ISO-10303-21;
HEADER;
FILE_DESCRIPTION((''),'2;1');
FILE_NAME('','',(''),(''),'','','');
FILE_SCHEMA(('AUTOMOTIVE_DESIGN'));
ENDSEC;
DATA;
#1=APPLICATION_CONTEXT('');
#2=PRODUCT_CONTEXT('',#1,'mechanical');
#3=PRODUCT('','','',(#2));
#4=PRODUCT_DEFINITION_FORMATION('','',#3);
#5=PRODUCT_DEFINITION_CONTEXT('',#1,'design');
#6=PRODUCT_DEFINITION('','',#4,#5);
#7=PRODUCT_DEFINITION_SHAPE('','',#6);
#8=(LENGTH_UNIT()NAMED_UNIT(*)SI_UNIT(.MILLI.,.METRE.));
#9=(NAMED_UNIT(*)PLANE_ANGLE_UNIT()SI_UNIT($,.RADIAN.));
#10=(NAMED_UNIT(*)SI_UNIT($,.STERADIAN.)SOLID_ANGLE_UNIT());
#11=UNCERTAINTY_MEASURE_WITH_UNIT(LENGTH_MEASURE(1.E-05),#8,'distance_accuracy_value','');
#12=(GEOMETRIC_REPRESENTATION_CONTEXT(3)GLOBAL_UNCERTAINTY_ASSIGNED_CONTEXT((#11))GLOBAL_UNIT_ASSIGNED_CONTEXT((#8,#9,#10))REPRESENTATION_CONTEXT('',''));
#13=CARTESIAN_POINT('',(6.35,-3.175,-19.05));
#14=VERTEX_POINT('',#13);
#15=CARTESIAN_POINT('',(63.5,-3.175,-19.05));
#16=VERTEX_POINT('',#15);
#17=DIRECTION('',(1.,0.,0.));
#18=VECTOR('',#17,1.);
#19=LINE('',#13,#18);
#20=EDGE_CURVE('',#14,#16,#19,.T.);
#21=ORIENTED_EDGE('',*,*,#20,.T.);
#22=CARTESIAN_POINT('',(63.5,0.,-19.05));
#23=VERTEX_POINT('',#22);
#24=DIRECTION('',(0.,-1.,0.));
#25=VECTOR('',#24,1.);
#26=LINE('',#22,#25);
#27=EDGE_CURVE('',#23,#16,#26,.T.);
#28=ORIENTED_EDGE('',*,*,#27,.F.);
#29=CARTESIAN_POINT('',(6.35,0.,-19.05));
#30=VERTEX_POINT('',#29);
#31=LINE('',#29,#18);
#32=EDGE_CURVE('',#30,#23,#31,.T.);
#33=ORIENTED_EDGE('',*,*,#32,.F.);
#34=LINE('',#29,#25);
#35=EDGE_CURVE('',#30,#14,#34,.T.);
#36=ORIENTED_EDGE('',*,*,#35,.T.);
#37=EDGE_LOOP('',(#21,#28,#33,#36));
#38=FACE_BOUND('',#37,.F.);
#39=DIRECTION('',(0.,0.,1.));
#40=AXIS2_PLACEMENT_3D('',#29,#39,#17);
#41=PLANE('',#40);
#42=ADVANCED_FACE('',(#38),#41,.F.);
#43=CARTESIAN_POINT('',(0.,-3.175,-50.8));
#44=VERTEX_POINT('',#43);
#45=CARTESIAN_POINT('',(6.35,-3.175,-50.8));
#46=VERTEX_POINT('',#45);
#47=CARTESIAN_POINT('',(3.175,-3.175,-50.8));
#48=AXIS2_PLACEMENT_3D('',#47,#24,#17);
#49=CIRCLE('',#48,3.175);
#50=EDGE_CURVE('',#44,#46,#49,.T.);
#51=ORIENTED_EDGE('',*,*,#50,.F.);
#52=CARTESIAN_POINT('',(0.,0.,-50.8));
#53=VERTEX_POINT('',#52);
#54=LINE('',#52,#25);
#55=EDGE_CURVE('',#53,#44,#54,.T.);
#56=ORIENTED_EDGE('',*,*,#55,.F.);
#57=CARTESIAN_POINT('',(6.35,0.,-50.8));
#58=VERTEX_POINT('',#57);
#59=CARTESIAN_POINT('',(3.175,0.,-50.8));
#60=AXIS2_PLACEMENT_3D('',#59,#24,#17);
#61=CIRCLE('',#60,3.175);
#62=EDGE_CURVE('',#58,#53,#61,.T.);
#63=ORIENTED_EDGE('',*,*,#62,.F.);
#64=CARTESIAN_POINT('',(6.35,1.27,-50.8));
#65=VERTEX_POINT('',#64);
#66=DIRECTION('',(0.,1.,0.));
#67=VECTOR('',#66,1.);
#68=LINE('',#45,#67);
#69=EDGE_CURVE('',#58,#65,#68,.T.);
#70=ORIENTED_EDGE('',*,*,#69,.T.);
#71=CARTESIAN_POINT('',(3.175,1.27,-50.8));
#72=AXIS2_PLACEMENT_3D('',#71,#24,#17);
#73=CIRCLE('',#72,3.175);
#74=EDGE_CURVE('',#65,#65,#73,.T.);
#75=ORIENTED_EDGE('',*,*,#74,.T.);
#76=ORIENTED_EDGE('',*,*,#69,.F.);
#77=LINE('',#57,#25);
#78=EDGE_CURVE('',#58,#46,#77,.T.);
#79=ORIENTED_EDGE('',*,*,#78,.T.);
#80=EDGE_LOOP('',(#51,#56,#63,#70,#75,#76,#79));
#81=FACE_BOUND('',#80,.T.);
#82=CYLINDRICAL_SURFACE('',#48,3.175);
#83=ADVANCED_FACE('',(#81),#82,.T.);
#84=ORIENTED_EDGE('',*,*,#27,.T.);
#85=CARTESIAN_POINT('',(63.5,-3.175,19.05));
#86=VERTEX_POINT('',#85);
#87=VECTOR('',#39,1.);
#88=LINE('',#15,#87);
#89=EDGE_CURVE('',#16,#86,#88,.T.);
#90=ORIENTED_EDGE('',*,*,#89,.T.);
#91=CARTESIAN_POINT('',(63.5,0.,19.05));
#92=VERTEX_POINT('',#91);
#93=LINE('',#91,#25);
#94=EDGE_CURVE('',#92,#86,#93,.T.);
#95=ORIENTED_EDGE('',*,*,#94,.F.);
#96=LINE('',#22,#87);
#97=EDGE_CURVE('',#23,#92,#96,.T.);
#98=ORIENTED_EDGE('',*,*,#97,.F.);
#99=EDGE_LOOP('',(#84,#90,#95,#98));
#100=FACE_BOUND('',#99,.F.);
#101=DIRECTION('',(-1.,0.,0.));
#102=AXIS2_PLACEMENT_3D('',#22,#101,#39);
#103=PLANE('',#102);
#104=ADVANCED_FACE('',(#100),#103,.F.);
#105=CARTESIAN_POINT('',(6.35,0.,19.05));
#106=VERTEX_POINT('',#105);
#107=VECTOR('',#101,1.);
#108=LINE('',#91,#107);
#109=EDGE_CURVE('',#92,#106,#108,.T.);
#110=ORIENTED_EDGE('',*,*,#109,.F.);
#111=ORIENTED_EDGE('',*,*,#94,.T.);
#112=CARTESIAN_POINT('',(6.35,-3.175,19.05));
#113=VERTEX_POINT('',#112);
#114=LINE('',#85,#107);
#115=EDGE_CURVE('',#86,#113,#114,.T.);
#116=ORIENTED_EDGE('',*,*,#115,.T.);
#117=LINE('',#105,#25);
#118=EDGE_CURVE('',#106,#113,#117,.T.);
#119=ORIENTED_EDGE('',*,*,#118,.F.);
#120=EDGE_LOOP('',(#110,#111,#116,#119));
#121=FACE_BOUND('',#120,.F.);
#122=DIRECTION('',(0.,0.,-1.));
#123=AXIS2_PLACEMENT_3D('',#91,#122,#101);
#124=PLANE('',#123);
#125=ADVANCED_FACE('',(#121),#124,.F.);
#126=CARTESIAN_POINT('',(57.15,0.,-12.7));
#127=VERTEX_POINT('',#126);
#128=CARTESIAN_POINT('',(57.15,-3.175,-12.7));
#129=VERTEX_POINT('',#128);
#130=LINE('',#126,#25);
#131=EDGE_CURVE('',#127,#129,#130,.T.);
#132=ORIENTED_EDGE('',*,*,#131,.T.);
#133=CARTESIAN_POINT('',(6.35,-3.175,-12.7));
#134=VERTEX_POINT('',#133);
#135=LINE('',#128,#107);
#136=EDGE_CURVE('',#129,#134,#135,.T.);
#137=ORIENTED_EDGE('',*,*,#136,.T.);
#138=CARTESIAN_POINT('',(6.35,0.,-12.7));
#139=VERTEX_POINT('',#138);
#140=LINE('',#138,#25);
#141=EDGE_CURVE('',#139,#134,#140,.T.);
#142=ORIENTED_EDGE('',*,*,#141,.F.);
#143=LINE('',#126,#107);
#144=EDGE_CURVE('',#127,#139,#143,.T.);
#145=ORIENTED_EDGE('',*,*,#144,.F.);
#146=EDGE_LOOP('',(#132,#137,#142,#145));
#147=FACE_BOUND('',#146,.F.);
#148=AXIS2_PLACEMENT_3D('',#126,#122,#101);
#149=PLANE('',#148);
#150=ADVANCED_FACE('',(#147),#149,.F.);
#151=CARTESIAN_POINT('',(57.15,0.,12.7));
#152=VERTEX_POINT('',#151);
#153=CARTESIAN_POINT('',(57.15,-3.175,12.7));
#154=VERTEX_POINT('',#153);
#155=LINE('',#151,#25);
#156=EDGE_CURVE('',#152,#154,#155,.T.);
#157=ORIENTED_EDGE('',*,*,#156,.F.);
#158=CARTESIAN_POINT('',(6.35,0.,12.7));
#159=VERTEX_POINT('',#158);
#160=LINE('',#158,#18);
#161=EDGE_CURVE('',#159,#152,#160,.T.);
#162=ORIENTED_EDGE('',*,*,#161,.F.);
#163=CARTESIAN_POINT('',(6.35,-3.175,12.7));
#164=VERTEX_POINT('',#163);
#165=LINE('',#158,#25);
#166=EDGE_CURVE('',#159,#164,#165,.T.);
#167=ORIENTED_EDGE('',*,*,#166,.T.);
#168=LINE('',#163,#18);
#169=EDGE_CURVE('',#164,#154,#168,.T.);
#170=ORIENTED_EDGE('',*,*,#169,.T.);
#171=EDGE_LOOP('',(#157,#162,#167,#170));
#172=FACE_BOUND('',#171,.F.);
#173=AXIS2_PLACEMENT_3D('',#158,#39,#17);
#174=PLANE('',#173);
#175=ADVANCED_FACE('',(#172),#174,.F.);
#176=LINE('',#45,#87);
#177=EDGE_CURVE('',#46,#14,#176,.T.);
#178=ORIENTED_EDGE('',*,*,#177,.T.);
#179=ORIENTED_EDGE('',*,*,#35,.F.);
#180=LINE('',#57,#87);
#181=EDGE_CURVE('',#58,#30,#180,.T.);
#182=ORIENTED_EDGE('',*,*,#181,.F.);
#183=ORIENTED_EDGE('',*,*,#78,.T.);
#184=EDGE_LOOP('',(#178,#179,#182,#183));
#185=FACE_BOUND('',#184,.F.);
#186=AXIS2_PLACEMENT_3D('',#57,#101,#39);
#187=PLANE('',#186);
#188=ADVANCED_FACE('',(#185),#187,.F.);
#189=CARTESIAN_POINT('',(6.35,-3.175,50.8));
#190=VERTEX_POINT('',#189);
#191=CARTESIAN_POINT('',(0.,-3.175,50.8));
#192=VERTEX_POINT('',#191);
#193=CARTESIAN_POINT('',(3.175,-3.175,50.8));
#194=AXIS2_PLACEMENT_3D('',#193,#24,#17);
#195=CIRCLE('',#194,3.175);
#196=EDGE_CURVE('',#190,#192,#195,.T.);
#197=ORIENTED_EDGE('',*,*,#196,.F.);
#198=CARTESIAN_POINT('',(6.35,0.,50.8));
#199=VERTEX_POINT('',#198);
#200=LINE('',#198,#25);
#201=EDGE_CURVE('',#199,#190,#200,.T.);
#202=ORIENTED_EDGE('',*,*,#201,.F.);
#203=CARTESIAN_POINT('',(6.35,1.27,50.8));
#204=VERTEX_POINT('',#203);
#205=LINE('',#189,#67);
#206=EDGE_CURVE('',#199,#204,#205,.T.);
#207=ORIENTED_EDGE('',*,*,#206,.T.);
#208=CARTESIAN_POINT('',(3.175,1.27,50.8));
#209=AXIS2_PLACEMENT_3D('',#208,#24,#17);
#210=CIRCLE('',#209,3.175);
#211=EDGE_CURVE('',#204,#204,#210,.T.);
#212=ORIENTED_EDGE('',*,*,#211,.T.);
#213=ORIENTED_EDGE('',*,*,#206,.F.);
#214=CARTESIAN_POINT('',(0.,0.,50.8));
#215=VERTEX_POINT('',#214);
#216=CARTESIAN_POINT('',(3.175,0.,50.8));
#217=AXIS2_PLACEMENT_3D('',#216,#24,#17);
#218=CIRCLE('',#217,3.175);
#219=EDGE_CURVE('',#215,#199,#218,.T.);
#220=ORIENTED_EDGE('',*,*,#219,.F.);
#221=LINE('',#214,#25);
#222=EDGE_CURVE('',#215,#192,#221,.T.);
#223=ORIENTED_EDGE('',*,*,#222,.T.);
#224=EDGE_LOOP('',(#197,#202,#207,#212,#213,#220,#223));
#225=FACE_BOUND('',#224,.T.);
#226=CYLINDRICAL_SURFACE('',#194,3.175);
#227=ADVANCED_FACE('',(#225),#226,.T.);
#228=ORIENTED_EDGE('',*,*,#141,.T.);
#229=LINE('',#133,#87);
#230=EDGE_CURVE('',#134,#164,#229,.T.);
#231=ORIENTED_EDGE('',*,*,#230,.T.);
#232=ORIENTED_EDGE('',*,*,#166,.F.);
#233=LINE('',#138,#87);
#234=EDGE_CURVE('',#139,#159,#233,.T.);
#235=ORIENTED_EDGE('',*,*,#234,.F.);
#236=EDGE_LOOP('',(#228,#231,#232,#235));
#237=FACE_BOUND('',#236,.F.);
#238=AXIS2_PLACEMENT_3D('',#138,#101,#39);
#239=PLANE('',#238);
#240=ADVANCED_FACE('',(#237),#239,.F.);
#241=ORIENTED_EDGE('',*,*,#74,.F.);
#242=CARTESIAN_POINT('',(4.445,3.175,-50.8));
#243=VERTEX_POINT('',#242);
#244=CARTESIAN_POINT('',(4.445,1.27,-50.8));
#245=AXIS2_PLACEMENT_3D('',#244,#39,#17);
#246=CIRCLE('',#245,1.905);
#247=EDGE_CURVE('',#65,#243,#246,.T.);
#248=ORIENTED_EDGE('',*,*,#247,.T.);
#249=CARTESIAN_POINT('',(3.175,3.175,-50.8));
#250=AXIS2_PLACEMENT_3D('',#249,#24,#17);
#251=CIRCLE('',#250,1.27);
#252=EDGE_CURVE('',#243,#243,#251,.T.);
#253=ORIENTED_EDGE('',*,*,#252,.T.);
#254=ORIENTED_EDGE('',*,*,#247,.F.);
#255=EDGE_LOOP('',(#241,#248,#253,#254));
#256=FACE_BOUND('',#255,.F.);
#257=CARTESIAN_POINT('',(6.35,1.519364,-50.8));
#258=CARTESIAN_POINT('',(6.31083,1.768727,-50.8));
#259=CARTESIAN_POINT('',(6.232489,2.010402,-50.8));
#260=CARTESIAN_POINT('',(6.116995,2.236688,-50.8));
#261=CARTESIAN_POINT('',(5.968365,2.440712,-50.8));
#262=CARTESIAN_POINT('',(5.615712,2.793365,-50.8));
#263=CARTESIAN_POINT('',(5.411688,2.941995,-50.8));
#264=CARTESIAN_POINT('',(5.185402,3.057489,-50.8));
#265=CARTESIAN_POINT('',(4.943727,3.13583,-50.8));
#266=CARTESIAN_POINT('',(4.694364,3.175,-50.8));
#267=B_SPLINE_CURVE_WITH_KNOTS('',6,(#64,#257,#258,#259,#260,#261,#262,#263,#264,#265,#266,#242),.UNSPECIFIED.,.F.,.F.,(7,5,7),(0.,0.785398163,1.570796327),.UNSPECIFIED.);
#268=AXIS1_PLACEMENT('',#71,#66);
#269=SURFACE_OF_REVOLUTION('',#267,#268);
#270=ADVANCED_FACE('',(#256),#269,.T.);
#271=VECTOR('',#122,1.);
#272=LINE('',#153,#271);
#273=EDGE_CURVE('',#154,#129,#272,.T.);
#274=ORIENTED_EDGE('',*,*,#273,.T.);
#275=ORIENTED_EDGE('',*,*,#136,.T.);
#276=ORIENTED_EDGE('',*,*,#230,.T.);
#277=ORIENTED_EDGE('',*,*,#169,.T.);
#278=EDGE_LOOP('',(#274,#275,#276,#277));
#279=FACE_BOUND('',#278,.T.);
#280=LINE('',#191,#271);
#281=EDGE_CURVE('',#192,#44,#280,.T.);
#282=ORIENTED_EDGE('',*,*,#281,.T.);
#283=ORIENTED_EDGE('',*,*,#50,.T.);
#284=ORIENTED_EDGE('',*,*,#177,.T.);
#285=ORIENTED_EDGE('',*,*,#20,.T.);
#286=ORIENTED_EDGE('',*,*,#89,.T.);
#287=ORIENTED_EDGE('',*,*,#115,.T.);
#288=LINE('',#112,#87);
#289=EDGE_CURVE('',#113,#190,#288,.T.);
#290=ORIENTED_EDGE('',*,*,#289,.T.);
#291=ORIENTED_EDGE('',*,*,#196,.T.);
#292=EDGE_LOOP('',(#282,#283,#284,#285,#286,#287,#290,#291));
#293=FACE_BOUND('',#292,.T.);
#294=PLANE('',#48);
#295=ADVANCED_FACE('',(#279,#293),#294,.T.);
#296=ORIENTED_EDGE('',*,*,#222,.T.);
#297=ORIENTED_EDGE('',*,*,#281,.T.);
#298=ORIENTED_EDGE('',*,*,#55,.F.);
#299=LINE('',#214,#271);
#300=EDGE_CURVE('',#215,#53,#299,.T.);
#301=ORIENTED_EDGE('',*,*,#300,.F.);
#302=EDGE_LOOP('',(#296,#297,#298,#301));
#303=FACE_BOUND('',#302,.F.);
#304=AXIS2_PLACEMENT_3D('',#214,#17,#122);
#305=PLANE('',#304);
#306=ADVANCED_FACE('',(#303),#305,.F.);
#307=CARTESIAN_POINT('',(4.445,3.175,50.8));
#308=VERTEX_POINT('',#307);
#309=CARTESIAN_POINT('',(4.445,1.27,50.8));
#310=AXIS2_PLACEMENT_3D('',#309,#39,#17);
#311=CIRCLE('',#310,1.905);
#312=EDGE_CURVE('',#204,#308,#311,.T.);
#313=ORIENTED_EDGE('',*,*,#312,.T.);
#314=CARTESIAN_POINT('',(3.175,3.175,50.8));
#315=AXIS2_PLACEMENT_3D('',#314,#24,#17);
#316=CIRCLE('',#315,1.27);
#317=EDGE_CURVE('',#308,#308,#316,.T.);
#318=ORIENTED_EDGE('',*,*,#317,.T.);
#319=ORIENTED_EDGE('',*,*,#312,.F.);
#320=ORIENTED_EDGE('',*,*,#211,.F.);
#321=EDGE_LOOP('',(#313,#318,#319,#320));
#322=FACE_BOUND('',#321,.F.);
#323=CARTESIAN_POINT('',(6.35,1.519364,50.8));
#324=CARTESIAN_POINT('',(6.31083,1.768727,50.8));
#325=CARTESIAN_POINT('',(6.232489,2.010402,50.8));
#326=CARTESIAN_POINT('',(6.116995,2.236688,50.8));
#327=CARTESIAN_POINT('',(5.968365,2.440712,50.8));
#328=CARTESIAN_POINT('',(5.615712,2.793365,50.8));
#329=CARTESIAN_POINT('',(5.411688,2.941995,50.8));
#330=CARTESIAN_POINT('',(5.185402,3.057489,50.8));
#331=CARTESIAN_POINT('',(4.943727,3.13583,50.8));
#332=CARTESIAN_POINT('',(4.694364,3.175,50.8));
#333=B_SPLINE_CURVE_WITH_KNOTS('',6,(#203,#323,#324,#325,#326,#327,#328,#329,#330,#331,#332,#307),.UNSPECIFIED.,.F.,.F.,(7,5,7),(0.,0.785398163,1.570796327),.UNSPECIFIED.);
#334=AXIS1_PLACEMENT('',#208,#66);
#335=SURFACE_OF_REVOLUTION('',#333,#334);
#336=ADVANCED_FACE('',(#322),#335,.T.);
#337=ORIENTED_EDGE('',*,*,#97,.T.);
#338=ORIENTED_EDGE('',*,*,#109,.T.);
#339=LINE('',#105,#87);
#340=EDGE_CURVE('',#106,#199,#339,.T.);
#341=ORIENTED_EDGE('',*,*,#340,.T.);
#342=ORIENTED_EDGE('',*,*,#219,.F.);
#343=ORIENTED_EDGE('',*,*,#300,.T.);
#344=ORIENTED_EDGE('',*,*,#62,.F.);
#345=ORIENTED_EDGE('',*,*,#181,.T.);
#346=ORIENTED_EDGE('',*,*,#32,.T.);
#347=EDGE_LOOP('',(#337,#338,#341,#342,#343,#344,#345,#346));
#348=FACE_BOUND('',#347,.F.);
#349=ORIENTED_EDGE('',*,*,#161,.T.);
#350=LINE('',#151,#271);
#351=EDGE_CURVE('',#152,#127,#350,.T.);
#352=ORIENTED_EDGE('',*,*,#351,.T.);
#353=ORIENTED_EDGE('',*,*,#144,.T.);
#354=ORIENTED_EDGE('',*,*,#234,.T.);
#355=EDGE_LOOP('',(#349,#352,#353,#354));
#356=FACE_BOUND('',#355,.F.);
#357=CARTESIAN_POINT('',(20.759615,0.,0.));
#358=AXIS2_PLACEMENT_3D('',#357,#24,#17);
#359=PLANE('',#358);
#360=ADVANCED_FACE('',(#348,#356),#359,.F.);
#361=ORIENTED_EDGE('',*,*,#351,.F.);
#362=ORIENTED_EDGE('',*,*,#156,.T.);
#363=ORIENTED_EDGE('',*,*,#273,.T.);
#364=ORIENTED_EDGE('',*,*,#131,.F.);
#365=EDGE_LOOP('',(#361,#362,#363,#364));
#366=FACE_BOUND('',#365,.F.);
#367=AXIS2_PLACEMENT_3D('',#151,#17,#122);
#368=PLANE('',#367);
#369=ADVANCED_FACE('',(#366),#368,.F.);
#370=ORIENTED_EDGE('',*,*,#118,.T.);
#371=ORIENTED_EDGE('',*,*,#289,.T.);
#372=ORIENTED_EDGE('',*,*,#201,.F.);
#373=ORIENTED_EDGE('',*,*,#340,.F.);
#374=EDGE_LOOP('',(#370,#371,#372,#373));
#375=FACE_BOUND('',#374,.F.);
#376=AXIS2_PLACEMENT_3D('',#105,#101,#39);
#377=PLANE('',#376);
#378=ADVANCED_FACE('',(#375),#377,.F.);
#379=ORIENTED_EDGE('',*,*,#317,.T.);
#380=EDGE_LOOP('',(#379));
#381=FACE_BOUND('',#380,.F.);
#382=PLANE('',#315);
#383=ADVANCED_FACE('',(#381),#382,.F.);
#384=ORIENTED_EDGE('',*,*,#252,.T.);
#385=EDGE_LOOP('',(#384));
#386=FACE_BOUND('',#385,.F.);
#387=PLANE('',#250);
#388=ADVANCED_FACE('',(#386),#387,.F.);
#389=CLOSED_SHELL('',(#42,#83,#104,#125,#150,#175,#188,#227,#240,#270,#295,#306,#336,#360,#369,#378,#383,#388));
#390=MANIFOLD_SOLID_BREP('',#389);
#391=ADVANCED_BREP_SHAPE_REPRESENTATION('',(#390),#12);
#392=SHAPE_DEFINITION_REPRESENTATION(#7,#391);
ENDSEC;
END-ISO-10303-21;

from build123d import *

# Parameters (mm, degrees)
F0_DEPTH = 3.175
F1_R     = 3.175
F4_DEPTH = 6.35
F2_R     = 1.905


# Not quite as in the source:
# - a length typed as a fraction of an inch, garbled in the dataset ("3 / 203.2 mm" for 3/8 in), is restored


with BuildPart() as f0:
    # F3 (on Front) → F0 (new body)
    with BuildSketch(Plane.XZ):
        Polygon((6.35, 50.8), (0, 50.8), (0, 0), (0, -50.8), (6.35, -50.8), (6.35, -19.05), (63.5, -19.05), (63.5, 19.05), (6.35, 19.05), align=None)
        Polygon((6.35, -12.7), (6.35, 0), (6.35, 12.7), (57.15, 12.7), (57.15, -12.7), align=None, mode=Mode.SUBTRACT)
    extrude(amount=F0_DEPTH)

    # F1 (on face) → F4 (join)
    with BuildSketch(Plane.XZ.offset(3.175)):
        with Locations((3.175, -50.8)):
            Circle(F1_R)
        with Locations((3.175, 50.8)):
            Circle(F1_R)
    extrude(amount=-F4_DEPTH)

    # F2
    f2_edges = [f0.edges().sort_by_distance(p)[0] for p in [
        (0, 3.175, 50.8),
        (0, 3.175, -50.8),
    ]]
    fillet(f2_edges, radius=F2_R)


solid = f0.part
